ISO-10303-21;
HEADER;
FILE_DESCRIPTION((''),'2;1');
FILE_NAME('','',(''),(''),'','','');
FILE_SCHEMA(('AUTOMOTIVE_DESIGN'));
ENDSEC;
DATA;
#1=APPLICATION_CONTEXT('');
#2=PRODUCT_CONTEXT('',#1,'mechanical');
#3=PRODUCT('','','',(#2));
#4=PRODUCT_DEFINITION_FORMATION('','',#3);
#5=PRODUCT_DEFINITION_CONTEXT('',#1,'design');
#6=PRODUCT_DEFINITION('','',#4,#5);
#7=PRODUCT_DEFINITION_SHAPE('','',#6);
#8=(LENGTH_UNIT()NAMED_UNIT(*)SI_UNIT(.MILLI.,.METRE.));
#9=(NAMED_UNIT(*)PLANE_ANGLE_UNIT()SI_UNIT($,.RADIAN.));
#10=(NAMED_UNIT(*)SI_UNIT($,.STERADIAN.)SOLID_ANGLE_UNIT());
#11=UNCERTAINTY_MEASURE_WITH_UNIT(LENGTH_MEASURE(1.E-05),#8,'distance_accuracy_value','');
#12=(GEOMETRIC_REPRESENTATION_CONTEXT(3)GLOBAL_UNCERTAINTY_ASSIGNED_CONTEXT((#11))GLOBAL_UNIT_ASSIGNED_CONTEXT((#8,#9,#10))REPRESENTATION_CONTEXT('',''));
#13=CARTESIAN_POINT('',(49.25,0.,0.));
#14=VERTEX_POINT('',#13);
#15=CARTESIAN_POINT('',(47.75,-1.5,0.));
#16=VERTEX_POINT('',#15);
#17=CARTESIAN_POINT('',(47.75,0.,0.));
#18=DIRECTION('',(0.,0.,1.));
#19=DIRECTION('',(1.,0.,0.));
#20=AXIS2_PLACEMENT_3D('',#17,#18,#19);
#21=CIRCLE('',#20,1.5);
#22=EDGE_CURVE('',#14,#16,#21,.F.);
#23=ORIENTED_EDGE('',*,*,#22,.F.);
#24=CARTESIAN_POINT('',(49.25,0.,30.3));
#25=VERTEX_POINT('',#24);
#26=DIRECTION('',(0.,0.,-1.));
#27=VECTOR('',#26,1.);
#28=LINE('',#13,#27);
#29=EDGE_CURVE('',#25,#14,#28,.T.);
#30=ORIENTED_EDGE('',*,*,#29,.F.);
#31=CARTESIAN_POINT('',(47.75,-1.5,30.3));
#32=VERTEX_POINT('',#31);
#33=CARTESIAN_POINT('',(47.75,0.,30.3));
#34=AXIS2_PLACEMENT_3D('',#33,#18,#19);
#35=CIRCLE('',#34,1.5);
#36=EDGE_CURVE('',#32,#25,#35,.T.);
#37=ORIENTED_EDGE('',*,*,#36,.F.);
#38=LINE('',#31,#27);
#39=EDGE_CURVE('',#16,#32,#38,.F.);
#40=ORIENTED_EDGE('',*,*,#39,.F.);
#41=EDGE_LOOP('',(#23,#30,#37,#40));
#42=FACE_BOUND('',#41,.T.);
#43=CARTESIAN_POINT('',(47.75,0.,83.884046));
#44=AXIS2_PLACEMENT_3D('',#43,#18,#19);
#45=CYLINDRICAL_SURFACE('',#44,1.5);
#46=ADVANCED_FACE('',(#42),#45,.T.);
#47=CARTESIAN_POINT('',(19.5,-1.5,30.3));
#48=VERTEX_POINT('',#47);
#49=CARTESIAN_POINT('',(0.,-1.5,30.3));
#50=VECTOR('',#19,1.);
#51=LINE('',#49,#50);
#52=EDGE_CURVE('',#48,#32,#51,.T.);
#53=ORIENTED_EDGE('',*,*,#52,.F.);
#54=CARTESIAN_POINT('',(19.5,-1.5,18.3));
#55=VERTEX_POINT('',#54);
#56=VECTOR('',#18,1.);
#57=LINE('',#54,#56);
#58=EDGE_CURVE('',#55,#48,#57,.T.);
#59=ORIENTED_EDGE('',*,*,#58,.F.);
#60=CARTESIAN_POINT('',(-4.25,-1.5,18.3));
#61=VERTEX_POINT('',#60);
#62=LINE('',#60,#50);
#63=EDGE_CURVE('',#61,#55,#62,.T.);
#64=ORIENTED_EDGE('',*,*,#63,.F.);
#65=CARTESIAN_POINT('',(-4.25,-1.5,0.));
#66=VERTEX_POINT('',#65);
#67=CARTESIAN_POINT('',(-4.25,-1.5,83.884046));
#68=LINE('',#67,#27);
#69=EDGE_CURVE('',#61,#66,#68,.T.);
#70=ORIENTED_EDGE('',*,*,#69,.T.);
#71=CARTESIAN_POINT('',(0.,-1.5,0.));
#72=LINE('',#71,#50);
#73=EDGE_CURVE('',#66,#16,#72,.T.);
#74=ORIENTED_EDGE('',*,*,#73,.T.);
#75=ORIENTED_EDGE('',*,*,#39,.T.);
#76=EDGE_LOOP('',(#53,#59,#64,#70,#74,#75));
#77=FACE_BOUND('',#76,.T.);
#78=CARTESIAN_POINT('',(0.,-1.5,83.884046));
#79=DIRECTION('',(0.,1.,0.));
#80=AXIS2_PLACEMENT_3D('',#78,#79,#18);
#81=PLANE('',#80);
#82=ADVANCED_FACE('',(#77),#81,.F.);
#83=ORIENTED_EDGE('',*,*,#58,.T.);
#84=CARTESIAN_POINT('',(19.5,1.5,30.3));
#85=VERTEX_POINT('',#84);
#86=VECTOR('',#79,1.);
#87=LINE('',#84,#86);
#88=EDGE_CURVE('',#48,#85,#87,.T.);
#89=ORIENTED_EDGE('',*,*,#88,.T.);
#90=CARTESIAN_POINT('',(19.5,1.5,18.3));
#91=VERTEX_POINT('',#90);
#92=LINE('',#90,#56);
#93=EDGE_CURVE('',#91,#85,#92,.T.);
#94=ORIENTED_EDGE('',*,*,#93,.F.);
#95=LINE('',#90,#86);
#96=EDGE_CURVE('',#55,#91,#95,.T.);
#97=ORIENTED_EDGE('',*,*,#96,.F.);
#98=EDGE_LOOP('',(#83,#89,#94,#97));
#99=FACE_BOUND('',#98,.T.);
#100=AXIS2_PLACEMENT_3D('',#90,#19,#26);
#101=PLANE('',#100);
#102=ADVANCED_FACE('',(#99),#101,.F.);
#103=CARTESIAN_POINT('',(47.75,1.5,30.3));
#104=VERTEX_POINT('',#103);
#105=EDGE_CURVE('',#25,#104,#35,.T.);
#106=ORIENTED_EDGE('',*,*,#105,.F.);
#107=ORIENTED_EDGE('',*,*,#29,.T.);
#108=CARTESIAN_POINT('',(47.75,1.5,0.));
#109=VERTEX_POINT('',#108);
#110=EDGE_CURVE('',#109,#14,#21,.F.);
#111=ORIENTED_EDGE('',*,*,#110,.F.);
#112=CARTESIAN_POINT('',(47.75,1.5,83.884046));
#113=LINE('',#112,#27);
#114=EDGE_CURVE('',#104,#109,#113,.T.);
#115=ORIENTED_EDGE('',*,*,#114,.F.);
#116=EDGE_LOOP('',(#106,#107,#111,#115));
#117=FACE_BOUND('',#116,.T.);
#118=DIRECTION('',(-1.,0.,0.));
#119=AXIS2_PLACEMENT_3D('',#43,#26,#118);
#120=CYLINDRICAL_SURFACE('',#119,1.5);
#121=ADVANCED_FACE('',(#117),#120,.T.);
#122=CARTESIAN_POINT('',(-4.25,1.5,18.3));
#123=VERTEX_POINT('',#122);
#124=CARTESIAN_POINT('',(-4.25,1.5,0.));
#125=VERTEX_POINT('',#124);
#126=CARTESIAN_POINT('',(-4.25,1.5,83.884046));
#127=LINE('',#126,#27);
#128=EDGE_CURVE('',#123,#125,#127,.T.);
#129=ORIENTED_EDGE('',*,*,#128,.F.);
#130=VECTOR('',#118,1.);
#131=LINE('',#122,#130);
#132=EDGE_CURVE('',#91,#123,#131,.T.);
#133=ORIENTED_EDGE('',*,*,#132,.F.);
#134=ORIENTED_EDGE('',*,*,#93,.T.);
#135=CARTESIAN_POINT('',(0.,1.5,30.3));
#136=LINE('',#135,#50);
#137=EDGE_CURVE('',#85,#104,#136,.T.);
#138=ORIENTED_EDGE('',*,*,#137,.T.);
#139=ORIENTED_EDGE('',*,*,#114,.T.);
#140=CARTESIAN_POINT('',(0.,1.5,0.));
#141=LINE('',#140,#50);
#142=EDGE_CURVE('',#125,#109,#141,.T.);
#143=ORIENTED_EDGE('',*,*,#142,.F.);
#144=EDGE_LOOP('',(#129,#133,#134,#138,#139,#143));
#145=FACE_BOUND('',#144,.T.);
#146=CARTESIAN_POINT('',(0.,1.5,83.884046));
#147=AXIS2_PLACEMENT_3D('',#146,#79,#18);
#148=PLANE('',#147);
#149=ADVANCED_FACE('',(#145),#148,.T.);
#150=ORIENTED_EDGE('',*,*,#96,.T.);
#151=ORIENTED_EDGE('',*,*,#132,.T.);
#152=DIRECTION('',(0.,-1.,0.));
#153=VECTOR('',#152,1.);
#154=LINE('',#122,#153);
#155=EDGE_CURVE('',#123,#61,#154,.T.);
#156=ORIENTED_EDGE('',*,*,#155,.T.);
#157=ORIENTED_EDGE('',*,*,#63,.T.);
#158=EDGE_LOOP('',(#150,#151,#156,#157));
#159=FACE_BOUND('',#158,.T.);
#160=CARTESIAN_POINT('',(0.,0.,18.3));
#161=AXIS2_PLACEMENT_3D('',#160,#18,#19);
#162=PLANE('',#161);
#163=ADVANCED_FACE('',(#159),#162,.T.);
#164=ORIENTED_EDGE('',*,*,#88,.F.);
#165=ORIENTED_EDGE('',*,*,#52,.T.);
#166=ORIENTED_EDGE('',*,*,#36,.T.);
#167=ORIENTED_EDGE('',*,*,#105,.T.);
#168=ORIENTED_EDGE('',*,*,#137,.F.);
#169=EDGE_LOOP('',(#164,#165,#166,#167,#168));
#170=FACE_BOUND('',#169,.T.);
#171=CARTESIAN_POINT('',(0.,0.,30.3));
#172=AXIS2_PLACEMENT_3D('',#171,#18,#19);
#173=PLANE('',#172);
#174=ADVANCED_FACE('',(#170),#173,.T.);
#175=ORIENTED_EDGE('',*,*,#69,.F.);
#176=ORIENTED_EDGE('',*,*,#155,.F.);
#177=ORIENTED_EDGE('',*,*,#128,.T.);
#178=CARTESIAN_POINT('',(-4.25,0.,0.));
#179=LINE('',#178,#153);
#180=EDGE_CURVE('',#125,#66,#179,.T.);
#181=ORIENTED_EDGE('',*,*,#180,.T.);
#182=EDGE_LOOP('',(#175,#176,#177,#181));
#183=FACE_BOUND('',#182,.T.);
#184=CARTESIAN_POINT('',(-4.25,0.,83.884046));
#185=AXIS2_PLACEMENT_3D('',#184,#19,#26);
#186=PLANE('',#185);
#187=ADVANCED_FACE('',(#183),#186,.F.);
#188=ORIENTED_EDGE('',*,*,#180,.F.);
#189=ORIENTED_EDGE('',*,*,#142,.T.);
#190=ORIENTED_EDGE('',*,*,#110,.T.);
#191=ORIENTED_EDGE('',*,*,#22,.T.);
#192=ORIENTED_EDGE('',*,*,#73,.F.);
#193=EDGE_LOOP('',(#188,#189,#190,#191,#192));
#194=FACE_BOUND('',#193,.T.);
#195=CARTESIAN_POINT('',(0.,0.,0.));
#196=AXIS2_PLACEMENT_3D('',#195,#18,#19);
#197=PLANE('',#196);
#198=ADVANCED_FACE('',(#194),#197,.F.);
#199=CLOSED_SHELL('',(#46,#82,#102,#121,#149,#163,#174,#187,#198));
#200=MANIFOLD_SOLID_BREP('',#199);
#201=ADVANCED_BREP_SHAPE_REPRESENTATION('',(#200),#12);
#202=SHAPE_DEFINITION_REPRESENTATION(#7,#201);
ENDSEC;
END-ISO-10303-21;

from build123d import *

# Parameters (mm, degrees)
SKETCH1_W           = 53.5
SKETCH1_H           = 3
BOSS_EXTRUDE1_DEPTH = 30.3
SKETCH2_W           = 23.75
SKETCH2_H           = 3
CUT_EXTRUDE1_DEPTH  = 12
FILLET1_R           = 1.5


with BuildPart() as part:
    # Sketch1 → Boss-Extrude1 (new body)
    with BuildSketch(Plane.XY):
        with Locations((22.5, 0)):
            Rectangle(SKETCH1_W, SKETCH1_H)
    extrude(amount=BOSS_EXTRUDE1_DEPTH)

    # Sketch2 → Cut-Extrude1 (cut)
    with BuildSketch(Plane.XY.offset(30.3)):
        with Locations((7.625, 0)):
            Rectangle(SKETCH2_W, SKETCH2_H)
    extrude(amount=-CUT_EXTRUDE1_DEPTH, mode=Mode.SUBTRACT)

    # Fillet1
    fillet1_edges = [part.edges().sort_by_distance(p)[0] for p in [
        (49.25, -1.5, 15.15),
        (49.25, 1.5, 15.15),
    ]]
    fillet(fillet1_edges, radius=FILLET1_R - 0.0001)  # a hair under: the kernel refuses the full size


solid = part.part
